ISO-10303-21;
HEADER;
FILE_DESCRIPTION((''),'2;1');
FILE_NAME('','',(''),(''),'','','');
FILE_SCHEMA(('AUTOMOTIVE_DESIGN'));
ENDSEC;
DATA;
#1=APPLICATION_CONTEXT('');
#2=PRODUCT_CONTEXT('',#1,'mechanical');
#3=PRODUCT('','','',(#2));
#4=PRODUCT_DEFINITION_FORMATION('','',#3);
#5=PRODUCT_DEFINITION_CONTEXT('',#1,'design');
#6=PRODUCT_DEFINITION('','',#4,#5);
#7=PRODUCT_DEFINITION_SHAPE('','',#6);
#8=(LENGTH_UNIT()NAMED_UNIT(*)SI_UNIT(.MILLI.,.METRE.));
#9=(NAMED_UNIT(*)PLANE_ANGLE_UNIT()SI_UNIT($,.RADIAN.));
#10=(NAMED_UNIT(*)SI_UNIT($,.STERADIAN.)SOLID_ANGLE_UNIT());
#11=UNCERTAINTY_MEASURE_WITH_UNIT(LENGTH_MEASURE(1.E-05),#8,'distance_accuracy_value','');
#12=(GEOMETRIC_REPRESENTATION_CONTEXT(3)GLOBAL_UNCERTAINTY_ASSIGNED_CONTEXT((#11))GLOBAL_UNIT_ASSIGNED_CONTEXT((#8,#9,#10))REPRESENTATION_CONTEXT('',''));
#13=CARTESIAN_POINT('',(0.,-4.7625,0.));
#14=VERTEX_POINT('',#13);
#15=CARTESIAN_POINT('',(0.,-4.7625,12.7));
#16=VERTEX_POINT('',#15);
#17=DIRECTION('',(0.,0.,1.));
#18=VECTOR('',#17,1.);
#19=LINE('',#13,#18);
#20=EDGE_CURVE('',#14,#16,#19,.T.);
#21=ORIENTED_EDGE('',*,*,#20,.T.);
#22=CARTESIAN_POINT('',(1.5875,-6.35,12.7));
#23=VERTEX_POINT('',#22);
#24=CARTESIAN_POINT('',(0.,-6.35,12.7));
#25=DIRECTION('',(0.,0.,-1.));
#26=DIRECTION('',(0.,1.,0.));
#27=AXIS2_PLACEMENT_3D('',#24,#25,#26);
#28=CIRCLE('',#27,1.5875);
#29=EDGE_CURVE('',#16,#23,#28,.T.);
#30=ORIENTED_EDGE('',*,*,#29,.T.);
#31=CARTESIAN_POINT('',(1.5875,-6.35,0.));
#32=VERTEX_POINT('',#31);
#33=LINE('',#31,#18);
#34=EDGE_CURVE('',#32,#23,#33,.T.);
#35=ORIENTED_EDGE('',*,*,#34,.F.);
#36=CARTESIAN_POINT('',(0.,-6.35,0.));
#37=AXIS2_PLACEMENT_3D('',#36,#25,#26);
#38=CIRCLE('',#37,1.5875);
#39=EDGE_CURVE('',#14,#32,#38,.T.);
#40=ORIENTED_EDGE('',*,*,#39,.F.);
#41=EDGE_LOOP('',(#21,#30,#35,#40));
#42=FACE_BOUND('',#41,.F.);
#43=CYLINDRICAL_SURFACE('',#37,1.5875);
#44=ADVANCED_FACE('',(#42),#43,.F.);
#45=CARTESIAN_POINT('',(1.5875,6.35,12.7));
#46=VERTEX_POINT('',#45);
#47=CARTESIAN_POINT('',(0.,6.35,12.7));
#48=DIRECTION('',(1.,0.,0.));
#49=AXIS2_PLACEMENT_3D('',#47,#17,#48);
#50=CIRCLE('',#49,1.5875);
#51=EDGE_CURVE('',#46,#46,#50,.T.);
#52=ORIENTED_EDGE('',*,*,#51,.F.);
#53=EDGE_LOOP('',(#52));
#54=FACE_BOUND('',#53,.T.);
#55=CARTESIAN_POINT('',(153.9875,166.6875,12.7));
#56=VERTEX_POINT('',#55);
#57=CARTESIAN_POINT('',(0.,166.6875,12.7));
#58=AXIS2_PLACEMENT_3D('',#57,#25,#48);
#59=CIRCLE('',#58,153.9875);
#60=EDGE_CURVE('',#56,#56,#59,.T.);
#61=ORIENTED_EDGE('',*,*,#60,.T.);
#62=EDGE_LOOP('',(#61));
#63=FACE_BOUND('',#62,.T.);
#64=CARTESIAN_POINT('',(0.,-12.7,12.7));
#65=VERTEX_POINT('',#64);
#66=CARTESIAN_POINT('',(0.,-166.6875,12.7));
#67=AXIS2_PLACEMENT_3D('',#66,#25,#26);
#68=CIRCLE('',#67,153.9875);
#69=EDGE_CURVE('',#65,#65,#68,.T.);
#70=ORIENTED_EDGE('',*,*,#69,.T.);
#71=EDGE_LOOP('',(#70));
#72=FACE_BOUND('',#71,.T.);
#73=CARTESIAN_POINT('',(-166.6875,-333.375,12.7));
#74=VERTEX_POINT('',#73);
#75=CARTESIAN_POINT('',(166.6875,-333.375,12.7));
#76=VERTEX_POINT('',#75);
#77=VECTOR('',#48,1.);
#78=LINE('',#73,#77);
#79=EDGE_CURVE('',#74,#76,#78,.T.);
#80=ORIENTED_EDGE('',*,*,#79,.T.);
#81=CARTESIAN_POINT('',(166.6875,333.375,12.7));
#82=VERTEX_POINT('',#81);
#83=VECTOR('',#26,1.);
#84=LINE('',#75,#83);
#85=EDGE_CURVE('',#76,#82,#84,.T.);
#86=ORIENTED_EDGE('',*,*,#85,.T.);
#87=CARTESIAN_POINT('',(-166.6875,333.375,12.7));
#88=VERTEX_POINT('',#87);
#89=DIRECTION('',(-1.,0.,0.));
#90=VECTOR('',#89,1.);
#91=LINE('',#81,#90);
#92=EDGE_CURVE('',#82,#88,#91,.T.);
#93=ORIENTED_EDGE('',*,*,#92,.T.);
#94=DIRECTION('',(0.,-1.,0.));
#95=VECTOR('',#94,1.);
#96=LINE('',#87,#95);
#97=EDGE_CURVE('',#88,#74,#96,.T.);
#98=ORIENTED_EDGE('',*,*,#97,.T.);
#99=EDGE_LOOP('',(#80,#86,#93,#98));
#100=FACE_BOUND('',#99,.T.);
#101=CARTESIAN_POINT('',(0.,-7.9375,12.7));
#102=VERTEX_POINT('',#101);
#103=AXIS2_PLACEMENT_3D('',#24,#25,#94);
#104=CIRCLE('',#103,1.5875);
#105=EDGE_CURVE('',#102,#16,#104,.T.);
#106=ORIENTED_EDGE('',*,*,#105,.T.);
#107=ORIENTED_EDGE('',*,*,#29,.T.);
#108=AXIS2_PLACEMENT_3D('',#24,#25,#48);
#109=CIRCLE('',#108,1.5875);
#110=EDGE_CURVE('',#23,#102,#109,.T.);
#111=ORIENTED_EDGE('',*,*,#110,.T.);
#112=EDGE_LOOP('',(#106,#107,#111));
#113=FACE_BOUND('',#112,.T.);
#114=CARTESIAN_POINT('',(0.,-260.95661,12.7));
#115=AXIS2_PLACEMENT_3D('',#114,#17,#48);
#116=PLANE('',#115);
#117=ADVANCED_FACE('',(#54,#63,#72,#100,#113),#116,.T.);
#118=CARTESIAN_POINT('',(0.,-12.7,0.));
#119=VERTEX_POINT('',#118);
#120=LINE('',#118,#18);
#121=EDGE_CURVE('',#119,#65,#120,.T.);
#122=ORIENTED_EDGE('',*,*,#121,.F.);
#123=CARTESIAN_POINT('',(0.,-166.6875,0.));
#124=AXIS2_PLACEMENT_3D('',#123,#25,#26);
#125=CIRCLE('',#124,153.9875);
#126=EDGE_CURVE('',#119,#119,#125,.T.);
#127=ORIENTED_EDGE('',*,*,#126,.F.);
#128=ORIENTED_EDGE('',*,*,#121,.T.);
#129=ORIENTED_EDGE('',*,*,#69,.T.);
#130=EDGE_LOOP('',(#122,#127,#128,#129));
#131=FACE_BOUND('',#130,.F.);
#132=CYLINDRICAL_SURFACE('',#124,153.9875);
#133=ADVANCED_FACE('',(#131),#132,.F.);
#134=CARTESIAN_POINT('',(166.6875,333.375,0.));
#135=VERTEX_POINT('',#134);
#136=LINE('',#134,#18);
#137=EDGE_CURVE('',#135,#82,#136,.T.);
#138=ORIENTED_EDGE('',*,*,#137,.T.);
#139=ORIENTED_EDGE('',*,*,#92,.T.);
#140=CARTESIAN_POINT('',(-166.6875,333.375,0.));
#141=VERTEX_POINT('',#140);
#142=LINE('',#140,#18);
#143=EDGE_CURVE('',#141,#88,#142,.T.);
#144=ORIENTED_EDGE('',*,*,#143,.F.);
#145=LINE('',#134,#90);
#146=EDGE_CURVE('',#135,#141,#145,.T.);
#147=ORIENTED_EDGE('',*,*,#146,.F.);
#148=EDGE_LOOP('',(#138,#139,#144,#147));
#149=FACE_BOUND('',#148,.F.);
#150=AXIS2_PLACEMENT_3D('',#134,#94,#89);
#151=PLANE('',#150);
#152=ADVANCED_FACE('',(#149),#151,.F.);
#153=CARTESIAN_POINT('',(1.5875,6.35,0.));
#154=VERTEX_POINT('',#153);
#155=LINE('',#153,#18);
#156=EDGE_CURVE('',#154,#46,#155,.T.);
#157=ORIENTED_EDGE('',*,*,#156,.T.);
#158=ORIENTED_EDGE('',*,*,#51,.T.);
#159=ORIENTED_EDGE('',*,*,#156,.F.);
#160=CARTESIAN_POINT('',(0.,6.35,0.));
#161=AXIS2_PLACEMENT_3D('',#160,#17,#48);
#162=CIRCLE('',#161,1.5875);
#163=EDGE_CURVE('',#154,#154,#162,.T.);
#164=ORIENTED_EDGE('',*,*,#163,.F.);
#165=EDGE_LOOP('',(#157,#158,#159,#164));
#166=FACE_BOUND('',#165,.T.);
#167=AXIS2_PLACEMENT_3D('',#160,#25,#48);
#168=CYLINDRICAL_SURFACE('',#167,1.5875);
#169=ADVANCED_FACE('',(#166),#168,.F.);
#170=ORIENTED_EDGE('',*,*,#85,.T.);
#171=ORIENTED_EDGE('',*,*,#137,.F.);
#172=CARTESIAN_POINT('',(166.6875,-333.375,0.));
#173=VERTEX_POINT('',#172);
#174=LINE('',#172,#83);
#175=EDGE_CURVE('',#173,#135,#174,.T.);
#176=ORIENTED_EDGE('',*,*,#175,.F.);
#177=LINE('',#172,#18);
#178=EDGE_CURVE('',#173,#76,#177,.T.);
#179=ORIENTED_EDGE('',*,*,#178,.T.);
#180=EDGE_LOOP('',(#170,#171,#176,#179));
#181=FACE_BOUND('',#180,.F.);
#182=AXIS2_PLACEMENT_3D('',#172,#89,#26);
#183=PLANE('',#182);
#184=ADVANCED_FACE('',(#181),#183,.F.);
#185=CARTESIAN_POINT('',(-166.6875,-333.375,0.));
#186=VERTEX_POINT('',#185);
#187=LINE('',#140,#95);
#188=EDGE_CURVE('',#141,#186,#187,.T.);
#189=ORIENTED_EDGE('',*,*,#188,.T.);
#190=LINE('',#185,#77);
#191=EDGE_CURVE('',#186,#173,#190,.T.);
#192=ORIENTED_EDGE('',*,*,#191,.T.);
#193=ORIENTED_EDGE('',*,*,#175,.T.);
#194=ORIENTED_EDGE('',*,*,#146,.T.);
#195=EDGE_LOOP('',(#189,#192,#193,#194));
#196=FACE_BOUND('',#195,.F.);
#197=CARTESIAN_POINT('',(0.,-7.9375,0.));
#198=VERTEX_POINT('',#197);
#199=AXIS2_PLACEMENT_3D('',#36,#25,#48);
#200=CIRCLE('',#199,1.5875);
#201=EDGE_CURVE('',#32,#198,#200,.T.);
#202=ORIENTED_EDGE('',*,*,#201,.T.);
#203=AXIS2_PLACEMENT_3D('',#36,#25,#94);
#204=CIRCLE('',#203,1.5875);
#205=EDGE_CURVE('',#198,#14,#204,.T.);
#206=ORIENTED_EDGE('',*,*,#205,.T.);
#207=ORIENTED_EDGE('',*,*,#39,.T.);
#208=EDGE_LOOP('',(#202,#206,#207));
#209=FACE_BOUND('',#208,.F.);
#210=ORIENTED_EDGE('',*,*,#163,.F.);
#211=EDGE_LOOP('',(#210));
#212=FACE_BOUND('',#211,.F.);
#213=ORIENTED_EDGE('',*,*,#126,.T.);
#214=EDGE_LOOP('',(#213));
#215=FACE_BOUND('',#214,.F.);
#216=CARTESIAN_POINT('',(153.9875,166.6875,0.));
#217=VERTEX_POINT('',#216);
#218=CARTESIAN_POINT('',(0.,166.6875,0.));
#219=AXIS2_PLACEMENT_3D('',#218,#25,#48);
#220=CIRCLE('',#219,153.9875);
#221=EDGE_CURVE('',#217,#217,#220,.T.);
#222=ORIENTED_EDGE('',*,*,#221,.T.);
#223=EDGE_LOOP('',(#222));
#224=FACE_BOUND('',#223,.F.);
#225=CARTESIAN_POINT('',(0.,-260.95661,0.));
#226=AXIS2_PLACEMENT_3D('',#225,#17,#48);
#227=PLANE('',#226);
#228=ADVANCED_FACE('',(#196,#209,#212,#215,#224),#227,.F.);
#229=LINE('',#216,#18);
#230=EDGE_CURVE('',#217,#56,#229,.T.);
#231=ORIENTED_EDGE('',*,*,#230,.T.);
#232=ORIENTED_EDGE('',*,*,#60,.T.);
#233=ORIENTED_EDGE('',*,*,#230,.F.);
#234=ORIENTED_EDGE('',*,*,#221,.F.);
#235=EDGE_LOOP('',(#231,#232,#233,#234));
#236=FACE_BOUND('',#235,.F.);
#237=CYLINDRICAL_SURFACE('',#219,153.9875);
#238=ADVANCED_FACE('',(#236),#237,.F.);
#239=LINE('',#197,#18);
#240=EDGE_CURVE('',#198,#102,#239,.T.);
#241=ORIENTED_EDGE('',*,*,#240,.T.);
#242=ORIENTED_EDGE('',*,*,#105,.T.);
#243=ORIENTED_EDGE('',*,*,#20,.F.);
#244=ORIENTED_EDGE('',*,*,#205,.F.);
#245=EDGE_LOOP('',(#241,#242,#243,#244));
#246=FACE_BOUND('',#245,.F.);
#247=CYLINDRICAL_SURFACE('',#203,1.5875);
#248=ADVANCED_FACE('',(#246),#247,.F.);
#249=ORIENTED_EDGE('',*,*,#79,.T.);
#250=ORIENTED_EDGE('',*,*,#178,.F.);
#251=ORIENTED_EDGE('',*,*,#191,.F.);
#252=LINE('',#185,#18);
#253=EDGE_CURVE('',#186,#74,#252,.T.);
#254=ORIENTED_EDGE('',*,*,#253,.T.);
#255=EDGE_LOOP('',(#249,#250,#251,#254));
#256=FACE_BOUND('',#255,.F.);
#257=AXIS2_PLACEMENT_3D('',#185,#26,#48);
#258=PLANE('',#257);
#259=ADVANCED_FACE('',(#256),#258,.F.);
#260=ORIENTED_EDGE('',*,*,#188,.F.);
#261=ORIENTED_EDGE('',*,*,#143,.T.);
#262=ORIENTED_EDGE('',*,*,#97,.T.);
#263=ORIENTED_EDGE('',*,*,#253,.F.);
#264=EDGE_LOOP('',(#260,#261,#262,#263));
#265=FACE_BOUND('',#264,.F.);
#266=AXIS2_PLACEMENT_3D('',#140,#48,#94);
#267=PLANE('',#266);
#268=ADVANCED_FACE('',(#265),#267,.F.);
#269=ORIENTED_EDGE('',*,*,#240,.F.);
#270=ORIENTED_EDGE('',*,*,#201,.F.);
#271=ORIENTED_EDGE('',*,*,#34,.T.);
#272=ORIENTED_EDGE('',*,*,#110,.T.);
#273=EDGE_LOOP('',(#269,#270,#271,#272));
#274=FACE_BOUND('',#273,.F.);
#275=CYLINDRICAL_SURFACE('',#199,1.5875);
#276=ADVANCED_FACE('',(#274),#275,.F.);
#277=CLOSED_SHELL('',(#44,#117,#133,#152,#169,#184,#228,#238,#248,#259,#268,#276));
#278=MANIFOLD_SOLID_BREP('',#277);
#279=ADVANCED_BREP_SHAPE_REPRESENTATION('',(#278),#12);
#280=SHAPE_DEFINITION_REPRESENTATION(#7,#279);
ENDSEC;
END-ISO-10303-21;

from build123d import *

# Parameters (mm, degrees)
F0_R     = 1.5875
F1_DEPTH = 12.7


with BuildPart() as f1:
    # F0 (on Top) → F1 (new body)
    with BuildSketch(Plane.XY):
        with BuildLine():
            ThreePointArc((4.517e-07, -333.375), (117.8658617487, -284.5533614293), (166.6875, -166.6875))
            Line((166.6875, -166.6875), (153.9875, -166.6875))
            ThreePointArc((153.9875, -166.6875), (0, -320.675), (-153.9875, -166.6875))
            Line((-153.9875, -166.6875), (-166.6875, -166.6875))
            ThreePointArc((-166.6875, -166.6875), (-117.8658614293, -284.5533617487), (4.517e-07, -333.375))
        make_face()
        with BuildLine():
            Line((153.9875, 166.6875), (166.6875, 166.6875))
            ThreePointArc((166.6875, 166.6875), (117.8658618859, 284.5533612921), (8.398e-07, 333.375))
            ThreePointArc((8.398e-07, 333.375), (-117.8658612921, 284.5533618859), (-166.6875, 166.6875))
            Line((-166.6875, 166.6875), (-153.9875, 166.6875))
            ThreePointArc((-153.9875, 166.6875), (0, 320.675), (153.9875, 166.6875))
        make_face()
        with BuildLine():
            ThreePointArc((-166.6875, -166.6875), (-117.865861589, -48.821638411), (0, 0))
            ThreePointArc((0, 0), (-117.865861589, 48.821638411), (-166.6875, 166.6875))
            Line((-166.6875, 166.6875), (-166.6875, -166.6875))
        make_face()
        with BuildLine():
            Line((153.9875, -166.6875), (166.6875, -166.6875))
            ThreePointArc((166.6875, -166.6875), (117.865861589, -48.821638411), (0, 0))
            Line((0, 0), (0, -4.7625))
            ThreePointArc((0, -4.7625), (1.1225320151, -5.2274679849), (1.5875, -6.35))
            ThreePointArc((1.5875, -6.35), (1.1225320151, -7.4725320151), (0, -7.9375))
            Line((0, -7.9375), (0, -12.7))
            ThreePointArc((0, -12.7), (108.885605468, -57.801894532), (153.9875, -166.6875))
        make_face()
        with BuildLine():
            ThreePointArc((0, 0), (117.865861589, 48.821638411), (166.6875, 166.6875))
            Line((166.6875, 166.6875), (153.9875, 166.6875))
            ThreePointArc((153.9875, 166.6875), (0, 12.7), (-153.9875, 166.6875))
            Line((-153.9875, 166.6875), (-166.6875, 166.6875))
            ThreePointArc((-166.6875, 166.6875), (-117.865861589, 48.821638411), (0, 0))
        make_face()
        with Locations((0, 6.35)):
            Circle(F0_R, mode=Mode.SUBTRACT)
        with BuildLine():
            ThreePointArc((0, 0), (117.865861589, -48.821638411), (166.6875, -166.6875))
            Line((166.6875, -166.6875), (166.6875, 166.6875))
            ThreePointArc((166.6875, 166.6875), (117.865861589, 48.821638411), (0, 0))
        make_face()
        with BuildLine():
            Line((-166.6875, -333.375), (4.517e-07, -333.375))
            ThreePointArc((4.517e-07, -333.375), (-117.8658614293, -284.5533617487), (-166.6875, -166.6875))
            Line((-166.6875, -166.6875), (-166.6875, -333.375))
        make_face()
        with BuildLine():
            Line((166.6875, -333.375), (166.6875, -166.6875))
            ThreePointArc((166.6875, -166.6875), (117.8658617487, -284.5533614293), (4.517e-07, -333.375))
            Line((4.517e-07, -333.375), (166.6875, -333.375))
        make_face()
        with BuildLine():
            ThreePointArc((-166.6875, 166.6875), (-117.8658612921, 284.5533618859), (8.398e-07, 333.375))
            Line((8.398e-07, 333.375), (-166.6875, 333.375))
            Line((-166.6875, 333.375), (-166.6875, 166.6875))
        make_face()
        with BuildLine():
            ThreePointArc((8.398e-07, 333.375), (117.8658618859, 284.5533612921), (166.6875, 166.6875))
            Line((166.6875, 166.6875), (166.6875, 333.375))
            Line((166.6875, 333.375), (8.398e-07, 333.375))
        make_face()
        with BuildLine():
            Line((0, -4.7625), (0, 0))
            ThreePointArc((0, 0), (-117.865861589, -48.821638411), (-166.6875, -166.6875))
            Line((-166.6875, -166.6875), (-153.9875, -166.6875))
            ThreePointArc((-153.9875, -166.6875), (-108.885605468, -57.801894532), (0, -12.7))
            Line((0, -12.7), (0, -7.9375))
            ThreePointArc((0, -7.9375), (-1.5875, -6.35), (0, -4.7625))
        make_face()
    extrude(amount=F1_DEPTH)


solid = f1.part
